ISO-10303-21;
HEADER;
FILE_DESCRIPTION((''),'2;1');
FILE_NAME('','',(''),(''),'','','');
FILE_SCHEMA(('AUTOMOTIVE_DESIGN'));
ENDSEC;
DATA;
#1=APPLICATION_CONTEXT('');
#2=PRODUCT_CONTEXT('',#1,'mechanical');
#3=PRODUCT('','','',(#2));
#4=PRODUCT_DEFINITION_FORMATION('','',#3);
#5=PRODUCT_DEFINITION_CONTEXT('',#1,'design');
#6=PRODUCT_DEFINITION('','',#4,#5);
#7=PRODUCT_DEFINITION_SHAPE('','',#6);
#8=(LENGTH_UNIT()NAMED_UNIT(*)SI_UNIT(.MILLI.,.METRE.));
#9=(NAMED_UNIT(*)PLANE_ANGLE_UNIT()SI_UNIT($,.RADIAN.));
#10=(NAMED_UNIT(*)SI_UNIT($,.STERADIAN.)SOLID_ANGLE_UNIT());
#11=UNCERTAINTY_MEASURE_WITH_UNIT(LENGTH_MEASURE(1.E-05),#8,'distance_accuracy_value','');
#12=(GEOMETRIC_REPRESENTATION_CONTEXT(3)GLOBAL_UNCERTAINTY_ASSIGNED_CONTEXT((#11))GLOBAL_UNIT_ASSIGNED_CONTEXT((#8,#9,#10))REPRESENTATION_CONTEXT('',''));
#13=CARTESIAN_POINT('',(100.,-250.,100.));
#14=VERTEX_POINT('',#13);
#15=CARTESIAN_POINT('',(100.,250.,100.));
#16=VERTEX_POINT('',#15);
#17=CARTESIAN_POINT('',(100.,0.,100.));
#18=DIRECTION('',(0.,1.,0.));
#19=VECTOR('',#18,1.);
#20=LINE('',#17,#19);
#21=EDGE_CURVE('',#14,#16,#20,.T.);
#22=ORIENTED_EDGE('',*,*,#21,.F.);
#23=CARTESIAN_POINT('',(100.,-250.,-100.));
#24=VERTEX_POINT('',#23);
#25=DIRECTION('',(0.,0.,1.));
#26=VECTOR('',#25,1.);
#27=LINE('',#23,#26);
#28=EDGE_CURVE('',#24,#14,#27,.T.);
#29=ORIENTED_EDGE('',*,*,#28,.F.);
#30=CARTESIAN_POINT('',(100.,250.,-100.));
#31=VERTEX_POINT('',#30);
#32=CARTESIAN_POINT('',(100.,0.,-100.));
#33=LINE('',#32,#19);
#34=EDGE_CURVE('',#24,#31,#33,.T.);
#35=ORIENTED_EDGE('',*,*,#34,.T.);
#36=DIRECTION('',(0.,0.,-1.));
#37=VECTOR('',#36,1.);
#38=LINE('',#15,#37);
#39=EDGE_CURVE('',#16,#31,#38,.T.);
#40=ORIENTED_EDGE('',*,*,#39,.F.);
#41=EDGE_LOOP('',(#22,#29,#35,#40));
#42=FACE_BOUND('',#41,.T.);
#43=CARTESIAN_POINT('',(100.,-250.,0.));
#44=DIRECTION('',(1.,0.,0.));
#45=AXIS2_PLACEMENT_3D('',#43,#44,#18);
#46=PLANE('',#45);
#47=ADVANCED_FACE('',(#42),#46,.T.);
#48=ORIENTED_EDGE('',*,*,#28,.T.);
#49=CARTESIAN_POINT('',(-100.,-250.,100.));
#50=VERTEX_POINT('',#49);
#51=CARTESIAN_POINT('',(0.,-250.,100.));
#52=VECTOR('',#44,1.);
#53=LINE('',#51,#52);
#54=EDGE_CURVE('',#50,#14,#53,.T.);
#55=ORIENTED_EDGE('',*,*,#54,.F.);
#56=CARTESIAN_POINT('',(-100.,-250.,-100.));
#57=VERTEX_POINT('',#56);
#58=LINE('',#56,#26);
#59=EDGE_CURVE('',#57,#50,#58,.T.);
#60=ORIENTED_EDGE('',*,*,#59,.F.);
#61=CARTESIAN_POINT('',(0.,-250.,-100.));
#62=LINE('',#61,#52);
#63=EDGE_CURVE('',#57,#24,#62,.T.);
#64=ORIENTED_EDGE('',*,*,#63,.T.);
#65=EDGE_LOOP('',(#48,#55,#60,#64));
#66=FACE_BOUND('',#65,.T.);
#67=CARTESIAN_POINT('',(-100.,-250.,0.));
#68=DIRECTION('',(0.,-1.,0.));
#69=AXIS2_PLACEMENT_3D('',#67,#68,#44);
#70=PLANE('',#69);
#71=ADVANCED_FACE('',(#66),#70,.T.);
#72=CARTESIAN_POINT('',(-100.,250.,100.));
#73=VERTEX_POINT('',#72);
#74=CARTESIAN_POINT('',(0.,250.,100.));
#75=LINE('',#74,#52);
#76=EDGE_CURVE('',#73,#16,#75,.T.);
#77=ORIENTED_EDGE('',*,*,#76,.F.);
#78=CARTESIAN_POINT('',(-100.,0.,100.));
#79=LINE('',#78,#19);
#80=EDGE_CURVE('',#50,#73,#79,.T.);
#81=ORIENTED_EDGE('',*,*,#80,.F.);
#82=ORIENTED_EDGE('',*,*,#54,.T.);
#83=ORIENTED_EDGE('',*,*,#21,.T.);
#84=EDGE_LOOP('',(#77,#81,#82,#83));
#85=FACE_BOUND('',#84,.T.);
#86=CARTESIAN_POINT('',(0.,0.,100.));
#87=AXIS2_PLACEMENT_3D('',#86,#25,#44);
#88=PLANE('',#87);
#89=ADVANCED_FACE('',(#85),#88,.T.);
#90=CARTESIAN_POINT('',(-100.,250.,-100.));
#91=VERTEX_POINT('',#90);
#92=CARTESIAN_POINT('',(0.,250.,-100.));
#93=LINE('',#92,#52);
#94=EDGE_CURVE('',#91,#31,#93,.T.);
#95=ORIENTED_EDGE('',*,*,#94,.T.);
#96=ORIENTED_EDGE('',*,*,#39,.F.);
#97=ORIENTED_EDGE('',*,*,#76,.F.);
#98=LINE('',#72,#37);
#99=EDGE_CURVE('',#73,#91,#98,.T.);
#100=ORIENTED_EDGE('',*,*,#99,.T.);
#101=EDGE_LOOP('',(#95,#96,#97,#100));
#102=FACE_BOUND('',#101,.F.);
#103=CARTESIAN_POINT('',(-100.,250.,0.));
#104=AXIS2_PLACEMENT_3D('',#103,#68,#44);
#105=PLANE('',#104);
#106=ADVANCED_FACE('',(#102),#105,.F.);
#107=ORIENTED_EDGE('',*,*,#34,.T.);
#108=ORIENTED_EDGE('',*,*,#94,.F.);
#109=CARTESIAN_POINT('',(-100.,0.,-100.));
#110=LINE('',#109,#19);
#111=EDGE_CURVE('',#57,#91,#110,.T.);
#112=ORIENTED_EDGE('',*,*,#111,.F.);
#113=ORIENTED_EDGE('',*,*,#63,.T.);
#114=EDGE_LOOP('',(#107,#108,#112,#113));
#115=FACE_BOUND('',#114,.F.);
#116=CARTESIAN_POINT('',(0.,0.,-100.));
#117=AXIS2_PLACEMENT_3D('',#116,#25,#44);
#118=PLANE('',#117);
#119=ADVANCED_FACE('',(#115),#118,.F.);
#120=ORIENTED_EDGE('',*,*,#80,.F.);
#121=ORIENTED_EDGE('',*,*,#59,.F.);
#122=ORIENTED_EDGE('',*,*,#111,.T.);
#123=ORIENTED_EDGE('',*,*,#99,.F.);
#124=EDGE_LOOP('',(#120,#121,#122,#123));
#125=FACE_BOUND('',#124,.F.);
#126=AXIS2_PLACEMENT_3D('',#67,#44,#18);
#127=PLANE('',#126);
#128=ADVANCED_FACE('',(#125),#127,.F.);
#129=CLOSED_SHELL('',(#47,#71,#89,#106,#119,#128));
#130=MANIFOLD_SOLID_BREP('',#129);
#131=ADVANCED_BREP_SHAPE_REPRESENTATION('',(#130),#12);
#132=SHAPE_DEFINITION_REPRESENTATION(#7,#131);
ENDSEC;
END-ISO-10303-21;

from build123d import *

# Parameters (mm, degrees)
F5_W          = 200
F5_H          = 500
F6_DEPTH      = 100
F6_DEPTH_BACK = 100


# Not quite as in the source:
# - a feature of the source that left no trace in its solid (it failed there, or was rolled back) is left out
# - the program builds the solid bodies; features that only make, move or delete a surface that nothing else refers to are left out


with BuildPart() as f6:
    # F5 (on Top) → F6 (new body, two sides)
    with BuildSketch(Plane.XY) as f6_sk:
        Rectangle(F5_W, F5_H)
    extrude(amount=F6_DEPTH)
    extrude(f6_sk.sketch, amount=-F6_DEPTH_BACK)


solid = f6.part
